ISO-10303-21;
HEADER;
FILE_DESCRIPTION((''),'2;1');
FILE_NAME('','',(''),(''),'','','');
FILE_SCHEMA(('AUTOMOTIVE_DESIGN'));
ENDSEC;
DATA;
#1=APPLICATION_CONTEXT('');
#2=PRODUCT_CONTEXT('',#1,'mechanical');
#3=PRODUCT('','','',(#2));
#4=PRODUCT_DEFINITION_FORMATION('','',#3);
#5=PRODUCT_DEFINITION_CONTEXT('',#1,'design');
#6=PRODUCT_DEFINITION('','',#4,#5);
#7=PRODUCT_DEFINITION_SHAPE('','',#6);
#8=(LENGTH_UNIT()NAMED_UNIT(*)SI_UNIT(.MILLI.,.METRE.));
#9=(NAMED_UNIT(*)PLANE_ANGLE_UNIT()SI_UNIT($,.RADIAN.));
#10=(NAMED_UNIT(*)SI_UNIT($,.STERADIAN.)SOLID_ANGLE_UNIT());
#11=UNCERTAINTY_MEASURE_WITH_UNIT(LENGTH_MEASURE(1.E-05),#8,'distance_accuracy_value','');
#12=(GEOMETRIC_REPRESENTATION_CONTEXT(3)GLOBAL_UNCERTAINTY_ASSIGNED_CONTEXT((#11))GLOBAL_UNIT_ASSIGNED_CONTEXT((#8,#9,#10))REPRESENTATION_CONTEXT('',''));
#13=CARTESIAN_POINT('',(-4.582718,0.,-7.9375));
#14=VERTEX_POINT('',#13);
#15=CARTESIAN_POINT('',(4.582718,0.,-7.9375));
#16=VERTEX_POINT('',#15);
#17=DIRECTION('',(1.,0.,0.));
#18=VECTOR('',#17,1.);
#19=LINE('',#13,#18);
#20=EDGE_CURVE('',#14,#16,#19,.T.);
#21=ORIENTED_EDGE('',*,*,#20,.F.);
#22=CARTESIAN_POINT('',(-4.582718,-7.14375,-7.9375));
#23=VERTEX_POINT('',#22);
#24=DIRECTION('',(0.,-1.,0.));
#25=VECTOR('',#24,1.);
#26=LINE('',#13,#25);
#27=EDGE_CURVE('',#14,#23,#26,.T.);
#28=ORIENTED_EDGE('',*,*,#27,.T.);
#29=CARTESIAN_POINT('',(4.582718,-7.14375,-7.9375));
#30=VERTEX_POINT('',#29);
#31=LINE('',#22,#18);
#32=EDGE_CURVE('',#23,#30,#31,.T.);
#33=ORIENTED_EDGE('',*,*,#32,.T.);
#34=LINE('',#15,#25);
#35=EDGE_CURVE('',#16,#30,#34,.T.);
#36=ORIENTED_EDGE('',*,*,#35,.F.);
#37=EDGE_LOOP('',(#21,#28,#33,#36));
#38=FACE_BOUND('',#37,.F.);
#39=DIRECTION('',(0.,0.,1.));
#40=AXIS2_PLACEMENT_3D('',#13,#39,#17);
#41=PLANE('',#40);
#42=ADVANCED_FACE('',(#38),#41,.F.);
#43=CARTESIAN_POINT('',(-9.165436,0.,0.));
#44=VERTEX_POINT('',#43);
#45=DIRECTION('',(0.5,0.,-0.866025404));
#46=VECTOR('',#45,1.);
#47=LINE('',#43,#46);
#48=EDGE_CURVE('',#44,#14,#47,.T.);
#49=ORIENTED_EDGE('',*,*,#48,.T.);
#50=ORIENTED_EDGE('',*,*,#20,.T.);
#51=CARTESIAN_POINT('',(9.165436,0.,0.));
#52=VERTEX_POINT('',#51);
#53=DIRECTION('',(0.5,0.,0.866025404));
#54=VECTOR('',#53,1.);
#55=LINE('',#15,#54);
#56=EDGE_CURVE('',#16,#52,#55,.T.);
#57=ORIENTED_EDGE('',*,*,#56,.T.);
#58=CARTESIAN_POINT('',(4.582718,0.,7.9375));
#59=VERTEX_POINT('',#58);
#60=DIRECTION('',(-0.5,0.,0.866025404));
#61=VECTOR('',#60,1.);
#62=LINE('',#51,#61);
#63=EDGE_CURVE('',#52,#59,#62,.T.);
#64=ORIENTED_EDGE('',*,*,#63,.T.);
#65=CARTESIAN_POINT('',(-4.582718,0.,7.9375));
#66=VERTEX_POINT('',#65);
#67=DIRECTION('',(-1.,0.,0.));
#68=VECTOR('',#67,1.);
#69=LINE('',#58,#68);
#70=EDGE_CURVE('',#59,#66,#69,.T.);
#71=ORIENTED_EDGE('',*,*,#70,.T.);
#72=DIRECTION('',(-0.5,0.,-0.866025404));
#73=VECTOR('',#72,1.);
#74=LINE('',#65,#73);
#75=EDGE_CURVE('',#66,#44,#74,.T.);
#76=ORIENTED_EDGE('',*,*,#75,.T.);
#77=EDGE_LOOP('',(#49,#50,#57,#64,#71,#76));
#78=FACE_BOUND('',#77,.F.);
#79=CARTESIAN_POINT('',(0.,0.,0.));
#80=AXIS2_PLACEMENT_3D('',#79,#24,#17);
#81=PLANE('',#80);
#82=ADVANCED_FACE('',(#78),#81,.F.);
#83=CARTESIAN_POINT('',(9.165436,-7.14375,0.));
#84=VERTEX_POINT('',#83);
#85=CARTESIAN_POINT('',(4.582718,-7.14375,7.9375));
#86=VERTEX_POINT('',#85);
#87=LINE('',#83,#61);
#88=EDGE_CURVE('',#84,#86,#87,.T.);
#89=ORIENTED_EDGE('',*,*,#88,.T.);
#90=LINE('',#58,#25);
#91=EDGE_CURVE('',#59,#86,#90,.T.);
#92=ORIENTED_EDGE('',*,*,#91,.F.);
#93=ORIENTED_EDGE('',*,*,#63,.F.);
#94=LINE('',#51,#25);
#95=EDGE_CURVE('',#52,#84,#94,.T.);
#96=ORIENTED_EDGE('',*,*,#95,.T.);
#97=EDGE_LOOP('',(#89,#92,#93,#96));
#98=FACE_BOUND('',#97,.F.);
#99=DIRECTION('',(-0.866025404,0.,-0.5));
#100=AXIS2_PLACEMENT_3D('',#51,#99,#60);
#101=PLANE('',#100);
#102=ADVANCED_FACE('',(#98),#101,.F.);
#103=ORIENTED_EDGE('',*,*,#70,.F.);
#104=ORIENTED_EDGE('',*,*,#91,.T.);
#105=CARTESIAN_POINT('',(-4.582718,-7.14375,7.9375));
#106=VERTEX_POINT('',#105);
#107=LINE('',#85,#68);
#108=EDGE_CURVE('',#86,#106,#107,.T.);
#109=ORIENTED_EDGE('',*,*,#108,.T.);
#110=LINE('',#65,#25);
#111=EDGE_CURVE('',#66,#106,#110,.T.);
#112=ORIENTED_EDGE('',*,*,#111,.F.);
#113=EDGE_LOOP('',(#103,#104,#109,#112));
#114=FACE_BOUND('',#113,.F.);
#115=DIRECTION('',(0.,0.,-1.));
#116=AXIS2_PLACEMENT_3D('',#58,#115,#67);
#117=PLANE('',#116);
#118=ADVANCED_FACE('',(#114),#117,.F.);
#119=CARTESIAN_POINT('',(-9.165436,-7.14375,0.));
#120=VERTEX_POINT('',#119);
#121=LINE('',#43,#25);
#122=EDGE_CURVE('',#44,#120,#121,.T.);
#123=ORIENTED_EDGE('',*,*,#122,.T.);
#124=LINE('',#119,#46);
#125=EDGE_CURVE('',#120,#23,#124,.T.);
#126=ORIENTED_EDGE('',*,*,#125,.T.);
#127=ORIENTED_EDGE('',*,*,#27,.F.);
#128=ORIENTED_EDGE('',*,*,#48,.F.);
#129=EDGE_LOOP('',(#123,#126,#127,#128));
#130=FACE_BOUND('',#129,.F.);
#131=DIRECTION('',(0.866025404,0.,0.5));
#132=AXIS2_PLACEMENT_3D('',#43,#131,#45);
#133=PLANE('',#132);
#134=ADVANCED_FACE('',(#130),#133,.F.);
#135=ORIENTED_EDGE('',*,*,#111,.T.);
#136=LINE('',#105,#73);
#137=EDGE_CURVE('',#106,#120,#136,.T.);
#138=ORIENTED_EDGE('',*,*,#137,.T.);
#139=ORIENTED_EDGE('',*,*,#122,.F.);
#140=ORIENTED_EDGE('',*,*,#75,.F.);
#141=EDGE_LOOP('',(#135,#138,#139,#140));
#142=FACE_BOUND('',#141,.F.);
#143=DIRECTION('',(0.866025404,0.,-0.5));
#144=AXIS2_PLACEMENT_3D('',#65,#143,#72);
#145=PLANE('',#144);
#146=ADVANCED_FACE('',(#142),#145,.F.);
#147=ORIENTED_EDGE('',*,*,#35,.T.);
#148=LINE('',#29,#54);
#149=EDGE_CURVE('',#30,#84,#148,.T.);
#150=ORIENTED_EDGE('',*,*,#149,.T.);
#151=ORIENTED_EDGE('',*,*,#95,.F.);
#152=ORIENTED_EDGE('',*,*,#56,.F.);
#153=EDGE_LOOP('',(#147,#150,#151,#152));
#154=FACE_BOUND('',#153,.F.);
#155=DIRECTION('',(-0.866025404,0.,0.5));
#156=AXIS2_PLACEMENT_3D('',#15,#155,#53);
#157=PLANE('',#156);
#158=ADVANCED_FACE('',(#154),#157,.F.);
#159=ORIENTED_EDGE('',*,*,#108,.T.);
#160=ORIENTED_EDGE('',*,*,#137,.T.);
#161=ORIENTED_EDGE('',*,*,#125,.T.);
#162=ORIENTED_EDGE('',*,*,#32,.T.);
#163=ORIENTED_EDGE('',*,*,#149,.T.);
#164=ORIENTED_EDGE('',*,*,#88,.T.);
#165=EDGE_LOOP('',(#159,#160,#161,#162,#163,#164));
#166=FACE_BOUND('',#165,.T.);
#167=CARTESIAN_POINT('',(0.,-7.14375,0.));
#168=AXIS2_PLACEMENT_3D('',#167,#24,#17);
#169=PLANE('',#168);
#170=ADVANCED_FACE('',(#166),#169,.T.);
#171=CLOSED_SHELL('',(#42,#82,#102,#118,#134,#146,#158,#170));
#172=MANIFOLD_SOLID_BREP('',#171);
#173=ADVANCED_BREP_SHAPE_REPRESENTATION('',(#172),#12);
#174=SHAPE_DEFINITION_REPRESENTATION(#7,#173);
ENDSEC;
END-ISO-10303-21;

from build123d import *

# Parameters (mm, degrees)
F1_DEPTH = 7.14375


# Not quite as in the source:
# - a length typed as a fraction of an inch, garbled in the dataset ("3 / 203.2 mm" for 3/8 in), is restored


with BuildPart() as f1:
    # F0 (on Front) → F1 (new body)
    with BuildSketch(Plane.XZ):
        Polygon((4.5827177617, 7.9375), (-4.5827177617, 7.9375), (-9.1654355234, 0), (-4.5827177617, -7.9375), (4.5827177617, -7.9375), (9.1654355234, 0), align=None)
    extrude(amount=F1_DEPTH)


solid = f1.part
